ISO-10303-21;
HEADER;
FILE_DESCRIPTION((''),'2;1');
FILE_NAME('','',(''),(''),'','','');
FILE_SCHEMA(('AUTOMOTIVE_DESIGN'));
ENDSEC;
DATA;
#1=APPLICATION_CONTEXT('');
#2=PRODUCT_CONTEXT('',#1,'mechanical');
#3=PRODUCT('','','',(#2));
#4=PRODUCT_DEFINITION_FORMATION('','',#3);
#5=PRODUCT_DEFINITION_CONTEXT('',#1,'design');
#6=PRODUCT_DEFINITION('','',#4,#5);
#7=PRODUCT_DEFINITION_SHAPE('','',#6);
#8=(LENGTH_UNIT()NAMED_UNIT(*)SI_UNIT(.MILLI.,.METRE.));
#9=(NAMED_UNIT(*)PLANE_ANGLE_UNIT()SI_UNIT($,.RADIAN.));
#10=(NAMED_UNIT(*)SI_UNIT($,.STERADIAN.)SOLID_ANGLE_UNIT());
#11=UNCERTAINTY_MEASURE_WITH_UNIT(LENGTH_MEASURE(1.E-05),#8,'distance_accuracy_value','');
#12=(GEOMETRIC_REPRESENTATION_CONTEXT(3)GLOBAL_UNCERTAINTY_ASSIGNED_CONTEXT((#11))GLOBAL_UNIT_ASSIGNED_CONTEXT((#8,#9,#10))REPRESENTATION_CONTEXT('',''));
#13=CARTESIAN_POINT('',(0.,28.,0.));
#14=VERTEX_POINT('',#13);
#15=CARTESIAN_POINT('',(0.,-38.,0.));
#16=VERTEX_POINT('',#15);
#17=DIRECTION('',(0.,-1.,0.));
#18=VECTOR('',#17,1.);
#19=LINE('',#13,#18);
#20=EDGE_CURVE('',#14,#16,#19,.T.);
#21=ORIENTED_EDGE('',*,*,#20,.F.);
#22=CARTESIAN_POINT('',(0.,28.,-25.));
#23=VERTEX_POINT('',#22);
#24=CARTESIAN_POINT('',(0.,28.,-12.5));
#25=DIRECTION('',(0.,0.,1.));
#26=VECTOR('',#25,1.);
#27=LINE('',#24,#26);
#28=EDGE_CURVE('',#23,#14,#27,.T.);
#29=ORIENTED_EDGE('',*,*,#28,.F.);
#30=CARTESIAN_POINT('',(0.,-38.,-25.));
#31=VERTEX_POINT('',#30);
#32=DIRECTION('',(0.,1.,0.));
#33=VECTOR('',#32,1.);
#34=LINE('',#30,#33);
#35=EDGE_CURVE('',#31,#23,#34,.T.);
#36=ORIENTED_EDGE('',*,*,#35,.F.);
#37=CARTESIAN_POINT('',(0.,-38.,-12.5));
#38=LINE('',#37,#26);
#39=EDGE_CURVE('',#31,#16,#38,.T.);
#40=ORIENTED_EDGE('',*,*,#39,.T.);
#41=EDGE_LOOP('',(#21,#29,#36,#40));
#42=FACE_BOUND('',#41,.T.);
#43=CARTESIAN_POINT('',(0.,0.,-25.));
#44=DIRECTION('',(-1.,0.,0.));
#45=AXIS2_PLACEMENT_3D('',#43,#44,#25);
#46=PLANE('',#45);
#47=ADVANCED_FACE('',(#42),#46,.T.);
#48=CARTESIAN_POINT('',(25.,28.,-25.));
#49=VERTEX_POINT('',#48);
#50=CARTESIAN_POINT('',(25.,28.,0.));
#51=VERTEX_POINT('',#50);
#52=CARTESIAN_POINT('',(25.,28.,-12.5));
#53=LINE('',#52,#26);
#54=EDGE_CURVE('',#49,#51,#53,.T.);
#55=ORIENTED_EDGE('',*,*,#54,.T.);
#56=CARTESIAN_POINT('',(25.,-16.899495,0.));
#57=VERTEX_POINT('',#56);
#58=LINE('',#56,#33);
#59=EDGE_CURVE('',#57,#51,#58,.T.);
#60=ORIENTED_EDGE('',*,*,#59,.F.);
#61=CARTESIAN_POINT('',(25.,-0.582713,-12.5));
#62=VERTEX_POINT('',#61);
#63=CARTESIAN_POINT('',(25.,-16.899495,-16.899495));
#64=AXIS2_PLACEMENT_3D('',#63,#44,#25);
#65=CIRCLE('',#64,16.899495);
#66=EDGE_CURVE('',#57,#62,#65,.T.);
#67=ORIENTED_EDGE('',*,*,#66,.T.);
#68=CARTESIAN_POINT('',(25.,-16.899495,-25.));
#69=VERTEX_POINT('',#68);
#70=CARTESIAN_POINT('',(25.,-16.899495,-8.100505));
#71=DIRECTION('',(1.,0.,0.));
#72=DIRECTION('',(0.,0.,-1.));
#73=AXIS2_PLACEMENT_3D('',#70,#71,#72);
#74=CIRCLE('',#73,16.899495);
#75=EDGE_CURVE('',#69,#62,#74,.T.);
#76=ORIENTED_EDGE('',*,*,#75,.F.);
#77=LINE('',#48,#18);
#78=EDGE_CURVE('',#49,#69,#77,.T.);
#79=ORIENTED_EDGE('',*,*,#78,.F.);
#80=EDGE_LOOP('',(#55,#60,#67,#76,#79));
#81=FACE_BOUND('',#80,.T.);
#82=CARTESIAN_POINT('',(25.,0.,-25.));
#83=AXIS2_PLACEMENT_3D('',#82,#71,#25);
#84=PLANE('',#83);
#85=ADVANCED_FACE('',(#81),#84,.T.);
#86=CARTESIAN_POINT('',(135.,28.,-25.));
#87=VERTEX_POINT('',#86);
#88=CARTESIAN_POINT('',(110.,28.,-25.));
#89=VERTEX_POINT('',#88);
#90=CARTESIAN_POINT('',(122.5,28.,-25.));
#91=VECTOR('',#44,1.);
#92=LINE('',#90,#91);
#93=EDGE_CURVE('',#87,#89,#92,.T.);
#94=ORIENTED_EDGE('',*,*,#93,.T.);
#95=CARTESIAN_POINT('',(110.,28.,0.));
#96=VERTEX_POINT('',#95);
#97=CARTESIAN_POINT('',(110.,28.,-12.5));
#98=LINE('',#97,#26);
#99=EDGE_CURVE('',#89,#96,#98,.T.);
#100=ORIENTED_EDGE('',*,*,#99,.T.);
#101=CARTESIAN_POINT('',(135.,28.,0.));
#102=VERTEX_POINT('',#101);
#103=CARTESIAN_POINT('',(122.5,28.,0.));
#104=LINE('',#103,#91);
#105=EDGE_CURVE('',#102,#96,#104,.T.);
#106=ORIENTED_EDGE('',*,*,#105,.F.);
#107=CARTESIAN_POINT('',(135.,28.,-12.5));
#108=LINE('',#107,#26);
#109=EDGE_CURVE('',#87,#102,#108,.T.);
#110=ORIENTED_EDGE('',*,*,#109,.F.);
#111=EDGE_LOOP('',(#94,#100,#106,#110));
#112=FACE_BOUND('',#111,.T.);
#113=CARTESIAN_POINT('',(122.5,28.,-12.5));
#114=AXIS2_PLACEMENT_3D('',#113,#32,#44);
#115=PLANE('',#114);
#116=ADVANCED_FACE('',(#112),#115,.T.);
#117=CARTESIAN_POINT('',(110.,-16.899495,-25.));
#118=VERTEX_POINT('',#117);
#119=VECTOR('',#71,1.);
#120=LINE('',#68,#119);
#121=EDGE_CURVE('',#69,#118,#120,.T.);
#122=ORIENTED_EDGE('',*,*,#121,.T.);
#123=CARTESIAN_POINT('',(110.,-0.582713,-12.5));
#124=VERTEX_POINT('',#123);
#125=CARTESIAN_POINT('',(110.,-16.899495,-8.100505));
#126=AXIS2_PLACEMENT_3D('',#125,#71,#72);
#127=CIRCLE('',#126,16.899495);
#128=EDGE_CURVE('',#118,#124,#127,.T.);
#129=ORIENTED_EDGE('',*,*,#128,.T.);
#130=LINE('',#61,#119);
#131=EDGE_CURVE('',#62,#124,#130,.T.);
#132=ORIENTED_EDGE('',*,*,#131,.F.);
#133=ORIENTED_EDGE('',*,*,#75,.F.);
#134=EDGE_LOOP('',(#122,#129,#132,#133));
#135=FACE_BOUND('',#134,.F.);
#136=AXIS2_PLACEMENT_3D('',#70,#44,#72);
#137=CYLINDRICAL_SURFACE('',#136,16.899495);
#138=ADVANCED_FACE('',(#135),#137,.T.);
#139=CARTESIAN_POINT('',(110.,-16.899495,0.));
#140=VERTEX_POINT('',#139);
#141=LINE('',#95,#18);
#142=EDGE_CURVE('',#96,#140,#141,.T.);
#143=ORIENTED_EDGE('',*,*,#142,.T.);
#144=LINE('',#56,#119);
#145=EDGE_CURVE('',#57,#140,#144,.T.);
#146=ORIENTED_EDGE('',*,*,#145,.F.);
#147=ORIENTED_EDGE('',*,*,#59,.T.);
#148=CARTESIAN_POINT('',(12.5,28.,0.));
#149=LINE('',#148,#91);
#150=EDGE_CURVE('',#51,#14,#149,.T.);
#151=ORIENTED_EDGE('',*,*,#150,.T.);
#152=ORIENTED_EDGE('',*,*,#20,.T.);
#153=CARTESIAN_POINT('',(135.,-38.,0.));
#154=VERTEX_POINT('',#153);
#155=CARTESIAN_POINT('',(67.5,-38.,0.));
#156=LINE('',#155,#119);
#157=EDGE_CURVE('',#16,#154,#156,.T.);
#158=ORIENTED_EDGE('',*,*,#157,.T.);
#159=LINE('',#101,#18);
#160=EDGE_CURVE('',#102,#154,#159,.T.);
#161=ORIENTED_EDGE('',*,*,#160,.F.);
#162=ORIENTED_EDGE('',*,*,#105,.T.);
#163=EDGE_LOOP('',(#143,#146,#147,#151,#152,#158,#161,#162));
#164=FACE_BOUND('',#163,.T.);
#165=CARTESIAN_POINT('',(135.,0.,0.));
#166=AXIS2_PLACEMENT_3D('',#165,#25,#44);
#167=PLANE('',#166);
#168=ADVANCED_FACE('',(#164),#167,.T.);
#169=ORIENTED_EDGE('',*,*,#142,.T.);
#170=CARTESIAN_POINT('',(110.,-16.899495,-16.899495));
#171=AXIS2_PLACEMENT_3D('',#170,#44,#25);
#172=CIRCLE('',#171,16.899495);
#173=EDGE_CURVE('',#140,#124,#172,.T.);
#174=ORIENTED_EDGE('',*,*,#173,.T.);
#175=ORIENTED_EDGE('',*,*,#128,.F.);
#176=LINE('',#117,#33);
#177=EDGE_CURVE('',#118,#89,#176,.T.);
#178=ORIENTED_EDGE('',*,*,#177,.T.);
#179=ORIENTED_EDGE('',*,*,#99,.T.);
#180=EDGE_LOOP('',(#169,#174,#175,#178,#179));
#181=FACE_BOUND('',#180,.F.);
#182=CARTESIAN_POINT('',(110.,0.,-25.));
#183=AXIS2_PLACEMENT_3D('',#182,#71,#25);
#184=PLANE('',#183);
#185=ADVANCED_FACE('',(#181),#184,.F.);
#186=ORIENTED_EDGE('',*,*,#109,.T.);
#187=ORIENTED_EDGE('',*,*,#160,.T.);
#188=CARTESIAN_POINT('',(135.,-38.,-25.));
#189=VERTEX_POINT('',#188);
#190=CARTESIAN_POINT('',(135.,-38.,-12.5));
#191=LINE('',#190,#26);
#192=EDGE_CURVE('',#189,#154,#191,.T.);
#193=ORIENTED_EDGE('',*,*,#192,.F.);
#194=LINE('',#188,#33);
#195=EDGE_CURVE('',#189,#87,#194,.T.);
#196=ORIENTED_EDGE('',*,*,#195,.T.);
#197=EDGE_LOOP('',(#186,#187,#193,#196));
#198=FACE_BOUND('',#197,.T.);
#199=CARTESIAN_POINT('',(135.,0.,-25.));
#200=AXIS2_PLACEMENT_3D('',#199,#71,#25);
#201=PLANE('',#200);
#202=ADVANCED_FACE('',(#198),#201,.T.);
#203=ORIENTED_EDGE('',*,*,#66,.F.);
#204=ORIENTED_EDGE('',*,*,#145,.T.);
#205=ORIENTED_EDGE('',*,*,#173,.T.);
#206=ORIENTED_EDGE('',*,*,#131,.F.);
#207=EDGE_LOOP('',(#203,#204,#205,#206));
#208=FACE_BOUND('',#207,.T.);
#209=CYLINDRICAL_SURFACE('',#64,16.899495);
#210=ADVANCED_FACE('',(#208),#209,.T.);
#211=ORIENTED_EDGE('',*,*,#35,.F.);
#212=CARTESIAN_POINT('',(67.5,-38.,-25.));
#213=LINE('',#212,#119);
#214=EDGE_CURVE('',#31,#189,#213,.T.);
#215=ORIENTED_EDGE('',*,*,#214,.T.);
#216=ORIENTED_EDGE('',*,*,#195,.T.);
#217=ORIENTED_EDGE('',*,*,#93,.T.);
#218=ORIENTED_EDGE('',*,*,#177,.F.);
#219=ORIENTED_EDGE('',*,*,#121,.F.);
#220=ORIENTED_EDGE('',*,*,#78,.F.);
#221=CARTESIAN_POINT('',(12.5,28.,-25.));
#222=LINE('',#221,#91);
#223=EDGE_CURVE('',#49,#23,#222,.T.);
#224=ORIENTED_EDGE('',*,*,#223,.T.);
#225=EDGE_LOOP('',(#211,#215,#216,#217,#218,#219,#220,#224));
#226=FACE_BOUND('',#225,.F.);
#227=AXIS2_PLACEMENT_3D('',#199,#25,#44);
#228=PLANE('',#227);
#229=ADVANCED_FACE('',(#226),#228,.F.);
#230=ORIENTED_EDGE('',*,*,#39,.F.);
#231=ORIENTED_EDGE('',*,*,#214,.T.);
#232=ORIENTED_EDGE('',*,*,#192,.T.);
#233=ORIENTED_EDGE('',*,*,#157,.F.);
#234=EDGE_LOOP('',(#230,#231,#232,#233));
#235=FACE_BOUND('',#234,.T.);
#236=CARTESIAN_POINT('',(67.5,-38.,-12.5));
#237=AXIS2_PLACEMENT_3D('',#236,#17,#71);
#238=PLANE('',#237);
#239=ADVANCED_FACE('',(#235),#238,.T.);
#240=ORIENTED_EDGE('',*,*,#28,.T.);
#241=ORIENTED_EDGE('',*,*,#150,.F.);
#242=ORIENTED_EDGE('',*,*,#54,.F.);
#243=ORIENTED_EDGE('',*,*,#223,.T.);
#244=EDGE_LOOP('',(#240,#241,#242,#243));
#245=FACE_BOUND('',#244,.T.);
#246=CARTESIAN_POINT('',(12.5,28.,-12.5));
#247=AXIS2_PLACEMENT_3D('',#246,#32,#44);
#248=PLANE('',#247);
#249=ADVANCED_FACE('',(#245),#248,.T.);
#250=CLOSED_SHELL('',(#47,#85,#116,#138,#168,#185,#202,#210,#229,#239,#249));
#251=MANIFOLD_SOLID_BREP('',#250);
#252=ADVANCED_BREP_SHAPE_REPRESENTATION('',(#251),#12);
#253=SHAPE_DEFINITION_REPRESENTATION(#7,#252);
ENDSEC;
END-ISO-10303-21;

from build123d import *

# Parameters (mm, degrees)
F0_W        = 135
F0_H        = 25
F1_DEPTH    = 38
F2_W        = 25
F2_H        = 25
F3_DEPTH    = 28
F4_T1_DEPTH = 85


# Not quite as in the source:
# - a fillet or chamfer that OpenCascade refuses, or shapes differently, is made with other operations: its cross-section is extruded or revolved along the edge and cut away or added


with BuildPart() as f1:
    # F0 (on Front) → F1 (new body)
    with BuildSketch(Plane.XZ):
        with Locations((67.5, -12.5)):
            Rectangle(F0_W, F0_H)
    extrude(amount=F1_DEPTH)

    # F2 (on face) → F3 (join)
    with BuildSketch(Plane(origin=(0, 0, 0), x_dir=(-1, 0, 0), z_dir=(0, 1, 0))):
        with Locations((-122.5, -12.5)):
            Rectangle(F2_W, F2_H)
        with Locations((-12.5, -12.5)):
            Rectangle(F2_W, F2_H)
    extrude(amount=F3_DEPTH)

    # F4: fillet of radius 16.8994949366 on 2 edges, made by hand

    # F4_s2 → F4_t1 (cut)
    with BuildSketch(Plane.YZ.offset(25)):
        with BuildLine():
            ThreePointArc((-16.8994949366, 0), (-4.9497474683, -4.9497474683), (0, -16.8994949366))
            Line((0, -16.8994949366), (0, 0))
            Line((0, 0), (-16.8994949366, 0))
        make_face()
        with BuildLine():
            ThreePointArc((-16.8994949366, -25), (-4.9497474683, -20.0502525317), (0, -8.1005050634))
            Line((0, -8.1005050634), (0, -25))
            Line((0, -25), (-16.8994949366, -25))
        make_face()
    extrude(amount=F4_T1_DEPTH, mode=Mode.SUBTRACT)


solid = f1.part
